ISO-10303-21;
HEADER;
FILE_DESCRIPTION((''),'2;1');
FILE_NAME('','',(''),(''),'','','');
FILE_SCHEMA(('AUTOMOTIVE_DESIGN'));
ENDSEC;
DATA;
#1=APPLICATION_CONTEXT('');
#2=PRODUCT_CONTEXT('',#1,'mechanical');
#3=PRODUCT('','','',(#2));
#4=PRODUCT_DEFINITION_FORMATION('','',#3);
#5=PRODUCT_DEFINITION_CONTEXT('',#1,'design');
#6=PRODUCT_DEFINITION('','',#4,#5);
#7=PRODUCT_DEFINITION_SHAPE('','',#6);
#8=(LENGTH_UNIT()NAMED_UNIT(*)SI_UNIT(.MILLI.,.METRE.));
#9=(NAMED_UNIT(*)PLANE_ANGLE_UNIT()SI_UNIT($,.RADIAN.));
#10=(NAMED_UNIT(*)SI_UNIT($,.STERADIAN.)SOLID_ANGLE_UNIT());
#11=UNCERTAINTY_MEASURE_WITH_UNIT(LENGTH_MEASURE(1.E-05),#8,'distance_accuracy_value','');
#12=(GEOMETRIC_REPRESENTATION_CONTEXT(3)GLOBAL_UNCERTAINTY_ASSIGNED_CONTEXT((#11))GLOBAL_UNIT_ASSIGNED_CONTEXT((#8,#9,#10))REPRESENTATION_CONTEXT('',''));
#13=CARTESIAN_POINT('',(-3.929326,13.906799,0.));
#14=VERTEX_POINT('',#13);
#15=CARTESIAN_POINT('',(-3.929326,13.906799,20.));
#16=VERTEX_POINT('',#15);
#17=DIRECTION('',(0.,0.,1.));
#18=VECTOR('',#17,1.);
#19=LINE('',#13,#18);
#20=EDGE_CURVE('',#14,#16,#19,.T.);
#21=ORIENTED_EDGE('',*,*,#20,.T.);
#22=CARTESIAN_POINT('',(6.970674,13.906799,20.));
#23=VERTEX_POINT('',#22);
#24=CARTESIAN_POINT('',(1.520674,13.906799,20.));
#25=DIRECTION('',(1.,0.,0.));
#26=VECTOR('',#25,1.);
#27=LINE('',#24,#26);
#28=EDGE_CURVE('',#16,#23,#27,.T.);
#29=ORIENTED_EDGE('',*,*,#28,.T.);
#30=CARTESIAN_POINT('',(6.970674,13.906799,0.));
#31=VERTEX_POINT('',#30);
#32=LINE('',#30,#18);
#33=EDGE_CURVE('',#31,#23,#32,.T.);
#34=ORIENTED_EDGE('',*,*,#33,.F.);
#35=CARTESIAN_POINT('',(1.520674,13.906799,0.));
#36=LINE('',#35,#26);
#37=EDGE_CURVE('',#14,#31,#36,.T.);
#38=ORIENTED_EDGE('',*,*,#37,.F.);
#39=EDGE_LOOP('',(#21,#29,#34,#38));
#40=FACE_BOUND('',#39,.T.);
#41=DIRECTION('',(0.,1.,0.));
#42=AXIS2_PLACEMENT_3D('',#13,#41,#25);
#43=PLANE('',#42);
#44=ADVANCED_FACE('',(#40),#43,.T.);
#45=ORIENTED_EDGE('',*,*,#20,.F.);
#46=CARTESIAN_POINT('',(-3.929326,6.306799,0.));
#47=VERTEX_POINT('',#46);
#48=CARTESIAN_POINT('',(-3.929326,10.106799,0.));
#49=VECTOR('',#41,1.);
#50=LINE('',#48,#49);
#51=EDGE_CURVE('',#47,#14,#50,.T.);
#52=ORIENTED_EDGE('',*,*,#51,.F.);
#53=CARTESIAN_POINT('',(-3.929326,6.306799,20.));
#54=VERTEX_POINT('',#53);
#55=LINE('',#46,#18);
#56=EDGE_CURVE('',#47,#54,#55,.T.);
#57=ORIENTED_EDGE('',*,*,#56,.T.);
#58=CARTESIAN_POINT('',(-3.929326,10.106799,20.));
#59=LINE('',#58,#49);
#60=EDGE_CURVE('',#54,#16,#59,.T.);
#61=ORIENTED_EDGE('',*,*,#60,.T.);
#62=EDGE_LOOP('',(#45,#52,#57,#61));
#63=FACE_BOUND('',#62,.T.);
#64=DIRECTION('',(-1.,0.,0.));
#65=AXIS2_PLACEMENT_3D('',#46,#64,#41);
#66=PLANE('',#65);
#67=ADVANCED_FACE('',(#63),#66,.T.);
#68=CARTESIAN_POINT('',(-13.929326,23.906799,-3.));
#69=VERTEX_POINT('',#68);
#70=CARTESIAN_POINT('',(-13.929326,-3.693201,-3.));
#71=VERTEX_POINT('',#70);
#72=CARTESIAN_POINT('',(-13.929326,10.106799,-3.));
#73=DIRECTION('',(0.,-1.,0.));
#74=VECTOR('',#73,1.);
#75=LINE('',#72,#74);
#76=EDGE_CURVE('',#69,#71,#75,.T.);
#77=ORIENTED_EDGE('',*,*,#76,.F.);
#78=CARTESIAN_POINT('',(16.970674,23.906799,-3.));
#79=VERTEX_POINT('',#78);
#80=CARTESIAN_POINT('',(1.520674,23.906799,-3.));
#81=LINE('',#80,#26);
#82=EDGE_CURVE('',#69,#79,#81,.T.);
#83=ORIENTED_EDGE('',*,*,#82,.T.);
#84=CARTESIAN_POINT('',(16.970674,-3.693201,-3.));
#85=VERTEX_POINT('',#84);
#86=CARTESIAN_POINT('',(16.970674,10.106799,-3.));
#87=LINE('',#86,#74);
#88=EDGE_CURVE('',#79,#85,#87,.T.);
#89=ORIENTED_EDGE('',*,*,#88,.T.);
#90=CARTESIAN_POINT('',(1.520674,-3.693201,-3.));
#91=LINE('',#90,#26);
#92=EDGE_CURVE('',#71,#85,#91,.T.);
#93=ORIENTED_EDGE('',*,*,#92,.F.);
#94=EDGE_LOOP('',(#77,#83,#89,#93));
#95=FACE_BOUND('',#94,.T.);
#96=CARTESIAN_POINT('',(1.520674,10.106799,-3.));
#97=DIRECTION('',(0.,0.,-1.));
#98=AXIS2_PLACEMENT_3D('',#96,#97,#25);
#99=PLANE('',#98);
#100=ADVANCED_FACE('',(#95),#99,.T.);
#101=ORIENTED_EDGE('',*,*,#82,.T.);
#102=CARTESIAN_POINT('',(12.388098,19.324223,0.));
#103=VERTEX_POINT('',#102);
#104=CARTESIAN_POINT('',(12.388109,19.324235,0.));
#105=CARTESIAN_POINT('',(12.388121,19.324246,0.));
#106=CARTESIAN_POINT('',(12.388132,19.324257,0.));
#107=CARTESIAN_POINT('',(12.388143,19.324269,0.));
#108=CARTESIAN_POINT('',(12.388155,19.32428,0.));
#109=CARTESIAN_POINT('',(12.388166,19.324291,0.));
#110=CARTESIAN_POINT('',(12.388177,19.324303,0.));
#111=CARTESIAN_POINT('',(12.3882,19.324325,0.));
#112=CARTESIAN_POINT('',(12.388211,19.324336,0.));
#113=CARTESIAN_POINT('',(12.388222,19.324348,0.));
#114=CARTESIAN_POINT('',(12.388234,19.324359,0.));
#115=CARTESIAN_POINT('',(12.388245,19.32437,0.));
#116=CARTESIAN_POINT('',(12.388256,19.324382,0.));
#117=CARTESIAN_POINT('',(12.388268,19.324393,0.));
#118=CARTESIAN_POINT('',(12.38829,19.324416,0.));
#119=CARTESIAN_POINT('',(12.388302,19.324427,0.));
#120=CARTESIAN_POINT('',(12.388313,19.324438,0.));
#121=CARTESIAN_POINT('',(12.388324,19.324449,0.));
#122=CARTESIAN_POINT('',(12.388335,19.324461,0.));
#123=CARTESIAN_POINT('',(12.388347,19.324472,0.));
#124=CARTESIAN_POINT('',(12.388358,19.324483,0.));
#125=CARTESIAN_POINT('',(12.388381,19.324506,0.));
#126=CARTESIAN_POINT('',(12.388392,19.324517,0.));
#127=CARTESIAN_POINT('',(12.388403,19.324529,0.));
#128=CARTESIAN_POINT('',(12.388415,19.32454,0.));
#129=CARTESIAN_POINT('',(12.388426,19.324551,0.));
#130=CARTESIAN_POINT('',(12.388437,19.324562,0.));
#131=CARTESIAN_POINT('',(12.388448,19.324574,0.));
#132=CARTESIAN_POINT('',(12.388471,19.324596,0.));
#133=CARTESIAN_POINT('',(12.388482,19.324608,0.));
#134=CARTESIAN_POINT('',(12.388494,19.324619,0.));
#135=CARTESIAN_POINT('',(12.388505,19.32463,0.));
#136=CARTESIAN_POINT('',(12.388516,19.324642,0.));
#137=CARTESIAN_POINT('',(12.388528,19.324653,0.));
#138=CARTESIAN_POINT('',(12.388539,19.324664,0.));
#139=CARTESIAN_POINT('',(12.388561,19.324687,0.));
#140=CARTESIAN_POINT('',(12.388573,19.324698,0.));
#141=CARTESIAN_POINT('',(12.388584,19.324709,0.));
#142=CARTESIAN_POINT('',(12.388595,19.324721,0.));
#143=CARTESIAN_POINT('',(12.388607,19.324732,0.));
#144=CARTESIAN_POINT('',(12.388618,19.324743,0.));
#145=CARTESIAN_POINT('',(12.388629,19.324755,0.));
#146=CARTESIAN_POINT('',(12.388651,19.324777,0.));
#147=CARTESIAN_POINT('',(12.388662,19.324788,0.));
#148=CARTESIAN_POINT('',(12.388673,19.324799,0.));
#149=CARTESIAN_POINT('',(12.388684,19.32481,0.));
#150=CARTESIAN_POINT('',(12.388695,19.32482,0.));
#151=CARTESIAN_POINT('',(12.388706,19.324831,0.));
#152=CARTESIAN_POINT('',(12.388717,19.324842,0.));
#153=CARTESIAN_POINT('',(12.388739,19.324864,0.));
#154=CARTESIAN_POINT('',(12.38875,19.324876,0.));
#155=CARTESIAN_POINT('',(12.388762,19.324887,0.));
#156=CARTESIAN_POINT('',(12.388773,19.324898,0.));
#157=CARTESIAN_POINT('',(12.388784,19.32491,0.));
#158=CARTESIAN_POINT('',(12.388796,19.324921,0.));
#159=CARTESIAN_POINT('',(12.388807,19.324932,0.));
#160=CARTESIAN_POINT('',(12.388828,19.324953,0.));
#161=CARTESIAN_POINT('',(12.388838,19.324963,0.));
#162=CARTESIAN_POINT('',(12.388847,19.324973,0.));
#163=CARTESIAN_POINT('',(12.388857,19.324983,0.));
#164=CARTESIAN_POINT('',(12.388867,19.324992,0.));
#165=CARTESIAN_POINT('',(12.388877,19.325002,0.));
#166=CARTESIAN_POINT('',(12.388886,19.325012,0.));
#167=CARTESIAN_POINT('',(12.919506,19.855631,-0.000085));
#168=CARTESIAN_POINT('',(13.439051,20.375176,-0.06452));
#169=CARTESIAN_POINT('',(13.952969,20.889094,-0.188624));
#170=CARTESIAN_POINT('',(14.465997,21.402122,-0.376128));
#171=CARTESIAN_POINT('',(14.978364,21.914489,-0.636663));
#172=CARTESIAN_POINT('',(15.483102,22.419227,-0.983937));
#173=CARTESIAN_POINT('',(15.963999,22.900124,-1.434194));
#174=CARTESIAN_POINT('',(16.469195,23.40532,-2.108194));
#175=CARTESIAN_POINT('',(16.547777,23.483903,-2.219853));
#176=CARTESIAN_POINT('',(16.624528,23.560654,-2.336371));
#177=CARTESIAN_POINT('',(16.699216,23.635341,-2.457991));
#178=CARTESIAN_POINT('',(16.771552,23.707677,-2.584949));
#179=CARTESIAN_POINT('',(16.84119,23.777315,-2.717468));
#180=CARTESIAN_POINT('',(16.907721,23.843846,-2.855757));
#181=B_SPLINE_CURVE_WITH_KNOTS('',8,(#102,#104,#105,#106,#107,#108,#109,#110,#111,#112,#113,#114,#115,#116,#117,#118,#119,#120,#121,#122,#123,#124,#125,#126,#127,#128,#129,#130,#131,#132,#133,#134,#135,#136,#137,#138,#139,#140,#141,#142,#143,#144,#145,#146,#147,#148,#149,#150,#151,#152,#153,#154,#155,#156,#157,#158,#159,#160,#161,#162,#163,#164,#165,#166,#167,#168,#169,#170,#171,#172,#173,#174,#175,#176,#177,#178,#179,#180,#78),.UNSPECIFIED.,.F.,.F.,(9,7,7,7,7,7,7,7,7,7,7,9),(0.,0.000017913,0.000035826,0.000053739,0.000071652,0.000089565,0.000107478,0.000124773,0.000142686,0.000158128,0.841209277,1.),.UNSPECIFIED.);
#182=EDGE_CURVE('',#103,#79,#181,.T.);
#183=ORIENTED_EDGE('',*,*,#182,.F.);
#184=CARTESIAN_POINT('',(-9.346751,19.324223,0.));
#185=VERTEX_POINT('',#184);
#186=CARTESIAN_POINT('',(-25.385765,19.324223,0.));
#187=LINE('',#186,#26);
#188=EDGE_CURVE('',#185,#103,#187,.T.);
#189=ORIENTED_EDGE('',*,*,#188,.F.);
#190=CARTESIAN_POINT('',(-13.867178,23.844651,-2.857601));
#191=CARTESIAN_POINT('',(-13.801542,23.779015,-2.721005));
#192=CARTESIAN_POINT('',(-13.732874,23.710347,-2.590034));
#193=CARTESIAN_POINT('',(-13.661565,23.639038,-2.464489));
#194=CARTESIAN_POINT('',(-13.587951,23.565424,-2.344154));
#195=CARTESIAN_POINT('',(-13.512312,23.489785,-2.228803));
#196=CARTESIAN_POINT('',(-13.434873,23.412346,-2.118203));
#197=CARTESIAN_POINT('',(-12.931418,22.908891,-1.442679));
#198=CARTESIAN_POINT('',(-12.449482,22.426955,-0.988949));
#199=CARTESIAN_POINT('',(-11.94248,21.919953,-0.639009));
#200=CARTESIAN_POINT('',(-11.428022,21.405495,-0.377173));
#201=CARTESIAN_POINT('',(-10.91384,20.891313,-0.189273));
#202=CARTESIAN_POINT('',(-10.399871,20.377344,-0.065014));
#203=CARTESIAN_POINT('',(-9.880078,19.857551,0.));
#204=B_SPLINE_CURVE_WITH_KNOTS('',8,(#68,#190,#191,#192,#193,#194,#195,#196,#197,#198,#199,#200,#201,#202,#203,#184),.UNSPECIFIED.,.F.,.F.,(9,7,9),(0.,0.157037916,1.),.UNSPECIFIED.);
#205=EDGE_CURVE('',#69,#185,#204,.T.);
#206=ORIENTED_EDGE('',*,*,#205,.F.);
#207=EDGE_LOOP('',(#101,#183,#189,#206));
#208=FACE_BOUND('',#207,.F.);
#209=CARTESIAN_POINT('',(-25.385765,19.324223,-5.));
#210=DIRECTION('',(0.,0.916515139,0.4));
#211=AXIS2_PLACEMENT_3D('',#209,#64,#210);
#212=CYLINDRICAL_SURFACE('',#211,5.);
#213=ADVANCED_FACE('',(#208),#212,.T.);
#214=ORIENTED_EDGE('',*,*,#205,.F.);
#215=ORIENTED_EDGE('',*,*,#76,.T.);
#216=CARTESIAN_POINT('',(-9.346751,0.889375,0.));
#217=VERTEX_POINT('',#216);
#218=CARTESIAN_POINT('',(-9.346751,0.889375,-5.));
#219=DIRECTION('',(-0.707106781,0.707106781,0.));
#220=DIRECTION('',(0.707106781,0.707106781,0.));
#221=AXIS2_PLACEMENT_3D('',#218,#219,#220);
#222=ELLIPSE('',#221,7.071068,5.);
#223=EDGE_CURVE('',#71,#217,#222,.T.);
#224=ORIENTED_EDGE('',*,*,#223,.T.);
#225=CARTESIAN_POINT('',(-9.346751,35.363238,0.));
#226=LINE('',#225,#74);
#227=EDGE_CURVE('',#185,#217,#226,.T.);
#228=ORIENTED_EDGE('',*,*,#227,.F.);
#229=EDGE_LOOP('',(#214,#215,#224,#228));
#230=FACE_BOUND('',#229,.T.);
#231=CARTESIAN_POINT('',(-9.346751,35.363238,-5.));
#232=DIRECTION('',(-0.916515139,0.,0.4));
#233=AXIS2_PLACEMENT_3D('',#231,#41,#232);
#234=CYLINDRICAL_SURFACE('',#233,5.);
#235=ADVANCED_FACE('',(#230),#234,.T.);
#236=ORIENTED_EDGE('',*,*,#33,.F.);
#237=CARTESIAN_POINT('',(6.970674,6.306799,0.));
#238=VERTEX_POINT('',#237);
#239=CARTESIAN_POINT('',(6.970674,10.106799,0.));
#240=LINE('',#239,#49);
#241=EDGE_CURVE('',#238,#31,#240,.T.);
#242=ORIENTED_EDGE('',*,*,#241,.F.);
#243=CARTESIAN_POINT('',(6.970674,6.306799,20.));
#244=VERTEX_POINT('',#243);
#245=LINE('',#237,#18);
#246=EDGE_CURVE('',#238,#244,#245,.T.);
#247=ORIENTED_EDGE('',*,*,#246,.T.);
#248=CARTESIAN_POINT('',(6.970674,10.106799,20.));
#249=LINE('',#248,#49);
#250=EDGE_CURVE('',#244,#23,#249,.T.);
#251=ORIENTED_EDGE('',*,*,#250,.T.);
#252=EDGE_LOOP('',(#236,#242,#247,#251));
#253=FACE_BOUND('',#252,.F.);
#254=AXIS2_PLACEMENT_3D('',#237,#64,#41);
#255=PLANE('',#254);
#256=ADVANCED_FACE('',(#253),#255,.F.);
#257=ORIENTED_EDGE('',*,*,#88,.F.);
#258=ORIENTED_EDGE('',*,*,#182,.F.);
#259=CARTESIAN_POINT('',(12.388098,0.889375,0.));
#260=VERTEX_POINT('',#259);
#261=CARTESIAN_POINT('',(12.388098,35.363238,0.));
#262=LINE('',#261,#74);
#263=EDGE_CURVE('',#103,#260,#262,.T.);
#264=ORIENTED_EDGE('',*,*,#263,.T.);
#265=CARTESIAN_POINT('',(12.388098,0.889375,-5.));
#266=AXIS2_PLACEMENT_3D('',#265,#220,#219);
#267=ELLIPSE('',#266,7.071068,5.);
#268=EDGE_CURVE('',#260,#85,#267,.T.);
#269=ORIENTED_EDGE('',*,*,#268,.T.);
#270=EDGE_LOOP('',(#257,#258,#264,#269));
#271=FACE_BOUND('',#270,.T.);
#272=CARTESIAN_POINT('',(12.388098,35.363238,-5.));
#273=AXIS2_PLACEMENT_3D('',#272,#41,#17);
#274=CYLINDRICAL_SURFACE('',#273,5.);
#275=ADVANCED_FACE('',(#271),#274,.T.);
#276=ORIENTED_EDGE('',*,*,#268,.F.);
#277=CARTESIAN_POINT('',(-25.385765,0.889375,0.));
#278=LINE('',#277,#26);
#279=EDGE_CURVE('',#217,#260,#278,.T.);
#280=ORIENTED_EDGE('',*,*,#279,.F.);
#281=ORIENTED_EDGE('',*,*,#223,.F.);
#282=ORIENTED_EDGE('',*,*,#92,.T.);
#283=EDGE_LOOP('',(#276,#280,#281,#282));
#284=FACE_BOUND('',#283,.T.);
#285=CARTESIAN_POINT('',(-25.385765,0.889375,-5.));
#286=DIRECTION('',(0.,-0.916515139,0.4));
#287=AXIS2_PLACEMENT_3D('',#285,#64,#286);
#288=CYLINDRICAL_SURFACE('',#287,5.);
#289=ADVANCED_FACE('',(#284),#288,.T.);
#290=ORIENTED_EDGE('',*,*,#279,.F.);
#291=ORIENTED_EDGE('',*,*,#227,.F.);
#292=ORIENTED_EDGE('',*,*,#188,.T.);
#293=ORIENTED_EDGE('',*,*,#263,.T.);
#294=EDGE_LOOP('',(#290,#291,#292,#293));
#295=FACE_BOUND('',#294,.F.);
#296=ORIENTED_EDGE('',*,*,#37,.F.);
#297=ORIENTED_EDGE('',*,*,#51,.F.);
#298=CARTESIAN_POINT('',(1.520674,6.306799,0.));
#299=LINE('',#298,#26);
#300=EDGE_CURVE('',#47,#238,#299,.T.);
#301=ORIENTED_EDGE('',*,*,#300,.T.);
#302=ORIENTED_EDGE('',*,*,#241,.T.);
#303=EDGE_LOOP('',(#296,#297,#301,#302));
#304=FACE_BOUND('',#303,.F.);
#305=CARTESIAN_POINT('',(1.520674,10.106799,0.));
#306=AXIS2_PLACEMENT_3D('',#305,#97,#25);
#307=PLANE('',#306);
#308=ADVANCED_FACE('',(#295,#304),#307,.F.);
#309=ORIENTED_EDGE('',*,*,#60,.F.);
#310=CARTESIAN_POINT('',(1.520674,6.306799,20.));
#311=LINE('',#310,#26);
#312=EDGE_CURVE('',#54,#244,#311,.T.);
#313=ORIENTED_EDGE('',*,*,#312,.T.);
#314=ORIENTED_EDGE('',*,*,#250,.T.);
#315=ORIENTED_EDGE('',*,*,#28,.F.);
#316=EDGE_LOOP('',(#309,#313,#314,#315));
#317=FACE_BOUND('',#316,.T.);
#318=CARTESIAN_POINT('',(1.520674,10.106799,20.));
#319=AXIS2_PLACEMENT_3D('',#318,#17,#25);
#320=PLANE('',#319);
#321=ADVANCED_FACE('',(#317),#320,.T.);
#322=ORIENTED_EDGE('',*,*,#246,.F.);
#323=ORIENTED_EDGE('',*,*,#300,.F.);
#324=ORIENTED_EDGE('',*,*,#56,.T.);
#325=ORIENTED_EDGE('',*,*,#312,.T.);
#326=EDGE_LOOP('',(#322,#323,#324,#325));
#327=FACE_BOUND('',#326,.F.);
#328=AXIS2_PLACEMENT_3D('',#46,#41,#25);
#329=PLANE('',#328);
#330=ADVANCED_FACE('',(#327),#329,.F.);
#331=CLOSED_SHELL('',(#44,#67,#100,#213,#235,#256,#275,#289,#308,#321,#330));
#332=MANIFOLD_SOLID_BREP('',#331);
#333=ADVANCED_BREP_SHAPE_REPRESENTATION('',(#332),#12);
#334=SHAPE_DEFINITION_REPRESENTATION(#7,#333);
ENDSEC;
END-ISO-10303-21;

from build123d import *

# Parameters (mm, degrees)
F0_W        = 10.9
F0_H        = 7.6
F1_DEPTH    = 20
F2_W        = 30.9
F2_H        = 27.6
F2_W_2      = 10.9
F2_H_2      = 7.6
F3_DEPTH    = 3
F4_T1_DEPTH = 50.5128784748
F4_T3_DEPTH = 53.8128784748


# Not quite as in the source:
# - a fillet or chamfer that OpenCascade refuses, or shapes differently, is made with other operations: its cross-section is extruded or revolved along the edge and cut away or added


with BuildPart() as f1:
    # F0 (on Top) → F1 (new body)
    with BuildSketch(Plane.XY):
        with Locations((1.5206737995, 10.1067991287)):
            Rectangle(F0_W, F0_H)
    extrude(amount=F1_DEPTH)

    # F2 (on face) → F3 (join)
    with BuildSketch(Plane(origin=(0, 0, 0), x_dir=(1, 0, 0), z_dir=(0, 0, -1))):
        with Locations((1.5206737995, -10.1067991287)):
            Rectangle(F2_W, F2_H)
        with Locations((1.5206737995, -10.1067991287)):
            Rectangle(F2_W_2, F2_H_2, mode=Mode.SUBTRACT)
        with Locations((1.5206737995, -10.1067991287)):
            Rectangle(F2_W_2, F2_H_2)
    extrude(amount=F3_DEPTH)

    # F4: fillet of radius 5 on 4 edges, made by hand

    # F4_s2 → F4_t1 (cut)
    with BuildSketch(Plane.XZ.offset(-35.363238366)):
        with BuildLine():
            ThreePointArc((-13.9293262005, -3), (-12.0853632931, -0.8166998673), (-9.3467505055, 0))
            Line((-9.3467505055, 0), (-13.9293262005, 0))
            Line((-13.9293262005, 0), (-13.9293262005, -3))
        make_face()
        with BuildLine():
            ThreePointArc((12.3880981046, 0), (15.1267108921, -0.8166998673), (16.9706737995, -3))
            Line((16.9706737995, -3), (16.9706737995, 0))
            Line((16.9706737995, 0), (12.3880981046, 0))
        make_face()
    extrude(amount=F4_T1_DEPTH, mode=Mode.SUBTRACT)

    # F4_s4 → F4_t3 (cut)
    with BuildSketch(Plane.YZ.offset(-25.3857654379)):
        with BuildLine():
            ThreePointArc((-3.6932008713, -3), (-1.8492379639, -0.8166998673), (0.8893748236, 0))
            Line((0.8893748236, 0), (-3.6932008713, 0))
            Line((-3.6932008713, 0), (-3.6932008713, -3))
        make_face()
        with BuildLine():
            ThreePointArc((23.9067991287, -3), (22.0628362212, -0.8166998673), (19.3242234337, 0))
            Line((19.3242234337, 0), (23.9067991287, 0))
            Line((23.9067991287, 0), (23.9067991287, -3))
        make_face()
    extrude(amount=F4_T3_DEPTH, mode=Mode.SUBTRACT)


solid = f1.part
